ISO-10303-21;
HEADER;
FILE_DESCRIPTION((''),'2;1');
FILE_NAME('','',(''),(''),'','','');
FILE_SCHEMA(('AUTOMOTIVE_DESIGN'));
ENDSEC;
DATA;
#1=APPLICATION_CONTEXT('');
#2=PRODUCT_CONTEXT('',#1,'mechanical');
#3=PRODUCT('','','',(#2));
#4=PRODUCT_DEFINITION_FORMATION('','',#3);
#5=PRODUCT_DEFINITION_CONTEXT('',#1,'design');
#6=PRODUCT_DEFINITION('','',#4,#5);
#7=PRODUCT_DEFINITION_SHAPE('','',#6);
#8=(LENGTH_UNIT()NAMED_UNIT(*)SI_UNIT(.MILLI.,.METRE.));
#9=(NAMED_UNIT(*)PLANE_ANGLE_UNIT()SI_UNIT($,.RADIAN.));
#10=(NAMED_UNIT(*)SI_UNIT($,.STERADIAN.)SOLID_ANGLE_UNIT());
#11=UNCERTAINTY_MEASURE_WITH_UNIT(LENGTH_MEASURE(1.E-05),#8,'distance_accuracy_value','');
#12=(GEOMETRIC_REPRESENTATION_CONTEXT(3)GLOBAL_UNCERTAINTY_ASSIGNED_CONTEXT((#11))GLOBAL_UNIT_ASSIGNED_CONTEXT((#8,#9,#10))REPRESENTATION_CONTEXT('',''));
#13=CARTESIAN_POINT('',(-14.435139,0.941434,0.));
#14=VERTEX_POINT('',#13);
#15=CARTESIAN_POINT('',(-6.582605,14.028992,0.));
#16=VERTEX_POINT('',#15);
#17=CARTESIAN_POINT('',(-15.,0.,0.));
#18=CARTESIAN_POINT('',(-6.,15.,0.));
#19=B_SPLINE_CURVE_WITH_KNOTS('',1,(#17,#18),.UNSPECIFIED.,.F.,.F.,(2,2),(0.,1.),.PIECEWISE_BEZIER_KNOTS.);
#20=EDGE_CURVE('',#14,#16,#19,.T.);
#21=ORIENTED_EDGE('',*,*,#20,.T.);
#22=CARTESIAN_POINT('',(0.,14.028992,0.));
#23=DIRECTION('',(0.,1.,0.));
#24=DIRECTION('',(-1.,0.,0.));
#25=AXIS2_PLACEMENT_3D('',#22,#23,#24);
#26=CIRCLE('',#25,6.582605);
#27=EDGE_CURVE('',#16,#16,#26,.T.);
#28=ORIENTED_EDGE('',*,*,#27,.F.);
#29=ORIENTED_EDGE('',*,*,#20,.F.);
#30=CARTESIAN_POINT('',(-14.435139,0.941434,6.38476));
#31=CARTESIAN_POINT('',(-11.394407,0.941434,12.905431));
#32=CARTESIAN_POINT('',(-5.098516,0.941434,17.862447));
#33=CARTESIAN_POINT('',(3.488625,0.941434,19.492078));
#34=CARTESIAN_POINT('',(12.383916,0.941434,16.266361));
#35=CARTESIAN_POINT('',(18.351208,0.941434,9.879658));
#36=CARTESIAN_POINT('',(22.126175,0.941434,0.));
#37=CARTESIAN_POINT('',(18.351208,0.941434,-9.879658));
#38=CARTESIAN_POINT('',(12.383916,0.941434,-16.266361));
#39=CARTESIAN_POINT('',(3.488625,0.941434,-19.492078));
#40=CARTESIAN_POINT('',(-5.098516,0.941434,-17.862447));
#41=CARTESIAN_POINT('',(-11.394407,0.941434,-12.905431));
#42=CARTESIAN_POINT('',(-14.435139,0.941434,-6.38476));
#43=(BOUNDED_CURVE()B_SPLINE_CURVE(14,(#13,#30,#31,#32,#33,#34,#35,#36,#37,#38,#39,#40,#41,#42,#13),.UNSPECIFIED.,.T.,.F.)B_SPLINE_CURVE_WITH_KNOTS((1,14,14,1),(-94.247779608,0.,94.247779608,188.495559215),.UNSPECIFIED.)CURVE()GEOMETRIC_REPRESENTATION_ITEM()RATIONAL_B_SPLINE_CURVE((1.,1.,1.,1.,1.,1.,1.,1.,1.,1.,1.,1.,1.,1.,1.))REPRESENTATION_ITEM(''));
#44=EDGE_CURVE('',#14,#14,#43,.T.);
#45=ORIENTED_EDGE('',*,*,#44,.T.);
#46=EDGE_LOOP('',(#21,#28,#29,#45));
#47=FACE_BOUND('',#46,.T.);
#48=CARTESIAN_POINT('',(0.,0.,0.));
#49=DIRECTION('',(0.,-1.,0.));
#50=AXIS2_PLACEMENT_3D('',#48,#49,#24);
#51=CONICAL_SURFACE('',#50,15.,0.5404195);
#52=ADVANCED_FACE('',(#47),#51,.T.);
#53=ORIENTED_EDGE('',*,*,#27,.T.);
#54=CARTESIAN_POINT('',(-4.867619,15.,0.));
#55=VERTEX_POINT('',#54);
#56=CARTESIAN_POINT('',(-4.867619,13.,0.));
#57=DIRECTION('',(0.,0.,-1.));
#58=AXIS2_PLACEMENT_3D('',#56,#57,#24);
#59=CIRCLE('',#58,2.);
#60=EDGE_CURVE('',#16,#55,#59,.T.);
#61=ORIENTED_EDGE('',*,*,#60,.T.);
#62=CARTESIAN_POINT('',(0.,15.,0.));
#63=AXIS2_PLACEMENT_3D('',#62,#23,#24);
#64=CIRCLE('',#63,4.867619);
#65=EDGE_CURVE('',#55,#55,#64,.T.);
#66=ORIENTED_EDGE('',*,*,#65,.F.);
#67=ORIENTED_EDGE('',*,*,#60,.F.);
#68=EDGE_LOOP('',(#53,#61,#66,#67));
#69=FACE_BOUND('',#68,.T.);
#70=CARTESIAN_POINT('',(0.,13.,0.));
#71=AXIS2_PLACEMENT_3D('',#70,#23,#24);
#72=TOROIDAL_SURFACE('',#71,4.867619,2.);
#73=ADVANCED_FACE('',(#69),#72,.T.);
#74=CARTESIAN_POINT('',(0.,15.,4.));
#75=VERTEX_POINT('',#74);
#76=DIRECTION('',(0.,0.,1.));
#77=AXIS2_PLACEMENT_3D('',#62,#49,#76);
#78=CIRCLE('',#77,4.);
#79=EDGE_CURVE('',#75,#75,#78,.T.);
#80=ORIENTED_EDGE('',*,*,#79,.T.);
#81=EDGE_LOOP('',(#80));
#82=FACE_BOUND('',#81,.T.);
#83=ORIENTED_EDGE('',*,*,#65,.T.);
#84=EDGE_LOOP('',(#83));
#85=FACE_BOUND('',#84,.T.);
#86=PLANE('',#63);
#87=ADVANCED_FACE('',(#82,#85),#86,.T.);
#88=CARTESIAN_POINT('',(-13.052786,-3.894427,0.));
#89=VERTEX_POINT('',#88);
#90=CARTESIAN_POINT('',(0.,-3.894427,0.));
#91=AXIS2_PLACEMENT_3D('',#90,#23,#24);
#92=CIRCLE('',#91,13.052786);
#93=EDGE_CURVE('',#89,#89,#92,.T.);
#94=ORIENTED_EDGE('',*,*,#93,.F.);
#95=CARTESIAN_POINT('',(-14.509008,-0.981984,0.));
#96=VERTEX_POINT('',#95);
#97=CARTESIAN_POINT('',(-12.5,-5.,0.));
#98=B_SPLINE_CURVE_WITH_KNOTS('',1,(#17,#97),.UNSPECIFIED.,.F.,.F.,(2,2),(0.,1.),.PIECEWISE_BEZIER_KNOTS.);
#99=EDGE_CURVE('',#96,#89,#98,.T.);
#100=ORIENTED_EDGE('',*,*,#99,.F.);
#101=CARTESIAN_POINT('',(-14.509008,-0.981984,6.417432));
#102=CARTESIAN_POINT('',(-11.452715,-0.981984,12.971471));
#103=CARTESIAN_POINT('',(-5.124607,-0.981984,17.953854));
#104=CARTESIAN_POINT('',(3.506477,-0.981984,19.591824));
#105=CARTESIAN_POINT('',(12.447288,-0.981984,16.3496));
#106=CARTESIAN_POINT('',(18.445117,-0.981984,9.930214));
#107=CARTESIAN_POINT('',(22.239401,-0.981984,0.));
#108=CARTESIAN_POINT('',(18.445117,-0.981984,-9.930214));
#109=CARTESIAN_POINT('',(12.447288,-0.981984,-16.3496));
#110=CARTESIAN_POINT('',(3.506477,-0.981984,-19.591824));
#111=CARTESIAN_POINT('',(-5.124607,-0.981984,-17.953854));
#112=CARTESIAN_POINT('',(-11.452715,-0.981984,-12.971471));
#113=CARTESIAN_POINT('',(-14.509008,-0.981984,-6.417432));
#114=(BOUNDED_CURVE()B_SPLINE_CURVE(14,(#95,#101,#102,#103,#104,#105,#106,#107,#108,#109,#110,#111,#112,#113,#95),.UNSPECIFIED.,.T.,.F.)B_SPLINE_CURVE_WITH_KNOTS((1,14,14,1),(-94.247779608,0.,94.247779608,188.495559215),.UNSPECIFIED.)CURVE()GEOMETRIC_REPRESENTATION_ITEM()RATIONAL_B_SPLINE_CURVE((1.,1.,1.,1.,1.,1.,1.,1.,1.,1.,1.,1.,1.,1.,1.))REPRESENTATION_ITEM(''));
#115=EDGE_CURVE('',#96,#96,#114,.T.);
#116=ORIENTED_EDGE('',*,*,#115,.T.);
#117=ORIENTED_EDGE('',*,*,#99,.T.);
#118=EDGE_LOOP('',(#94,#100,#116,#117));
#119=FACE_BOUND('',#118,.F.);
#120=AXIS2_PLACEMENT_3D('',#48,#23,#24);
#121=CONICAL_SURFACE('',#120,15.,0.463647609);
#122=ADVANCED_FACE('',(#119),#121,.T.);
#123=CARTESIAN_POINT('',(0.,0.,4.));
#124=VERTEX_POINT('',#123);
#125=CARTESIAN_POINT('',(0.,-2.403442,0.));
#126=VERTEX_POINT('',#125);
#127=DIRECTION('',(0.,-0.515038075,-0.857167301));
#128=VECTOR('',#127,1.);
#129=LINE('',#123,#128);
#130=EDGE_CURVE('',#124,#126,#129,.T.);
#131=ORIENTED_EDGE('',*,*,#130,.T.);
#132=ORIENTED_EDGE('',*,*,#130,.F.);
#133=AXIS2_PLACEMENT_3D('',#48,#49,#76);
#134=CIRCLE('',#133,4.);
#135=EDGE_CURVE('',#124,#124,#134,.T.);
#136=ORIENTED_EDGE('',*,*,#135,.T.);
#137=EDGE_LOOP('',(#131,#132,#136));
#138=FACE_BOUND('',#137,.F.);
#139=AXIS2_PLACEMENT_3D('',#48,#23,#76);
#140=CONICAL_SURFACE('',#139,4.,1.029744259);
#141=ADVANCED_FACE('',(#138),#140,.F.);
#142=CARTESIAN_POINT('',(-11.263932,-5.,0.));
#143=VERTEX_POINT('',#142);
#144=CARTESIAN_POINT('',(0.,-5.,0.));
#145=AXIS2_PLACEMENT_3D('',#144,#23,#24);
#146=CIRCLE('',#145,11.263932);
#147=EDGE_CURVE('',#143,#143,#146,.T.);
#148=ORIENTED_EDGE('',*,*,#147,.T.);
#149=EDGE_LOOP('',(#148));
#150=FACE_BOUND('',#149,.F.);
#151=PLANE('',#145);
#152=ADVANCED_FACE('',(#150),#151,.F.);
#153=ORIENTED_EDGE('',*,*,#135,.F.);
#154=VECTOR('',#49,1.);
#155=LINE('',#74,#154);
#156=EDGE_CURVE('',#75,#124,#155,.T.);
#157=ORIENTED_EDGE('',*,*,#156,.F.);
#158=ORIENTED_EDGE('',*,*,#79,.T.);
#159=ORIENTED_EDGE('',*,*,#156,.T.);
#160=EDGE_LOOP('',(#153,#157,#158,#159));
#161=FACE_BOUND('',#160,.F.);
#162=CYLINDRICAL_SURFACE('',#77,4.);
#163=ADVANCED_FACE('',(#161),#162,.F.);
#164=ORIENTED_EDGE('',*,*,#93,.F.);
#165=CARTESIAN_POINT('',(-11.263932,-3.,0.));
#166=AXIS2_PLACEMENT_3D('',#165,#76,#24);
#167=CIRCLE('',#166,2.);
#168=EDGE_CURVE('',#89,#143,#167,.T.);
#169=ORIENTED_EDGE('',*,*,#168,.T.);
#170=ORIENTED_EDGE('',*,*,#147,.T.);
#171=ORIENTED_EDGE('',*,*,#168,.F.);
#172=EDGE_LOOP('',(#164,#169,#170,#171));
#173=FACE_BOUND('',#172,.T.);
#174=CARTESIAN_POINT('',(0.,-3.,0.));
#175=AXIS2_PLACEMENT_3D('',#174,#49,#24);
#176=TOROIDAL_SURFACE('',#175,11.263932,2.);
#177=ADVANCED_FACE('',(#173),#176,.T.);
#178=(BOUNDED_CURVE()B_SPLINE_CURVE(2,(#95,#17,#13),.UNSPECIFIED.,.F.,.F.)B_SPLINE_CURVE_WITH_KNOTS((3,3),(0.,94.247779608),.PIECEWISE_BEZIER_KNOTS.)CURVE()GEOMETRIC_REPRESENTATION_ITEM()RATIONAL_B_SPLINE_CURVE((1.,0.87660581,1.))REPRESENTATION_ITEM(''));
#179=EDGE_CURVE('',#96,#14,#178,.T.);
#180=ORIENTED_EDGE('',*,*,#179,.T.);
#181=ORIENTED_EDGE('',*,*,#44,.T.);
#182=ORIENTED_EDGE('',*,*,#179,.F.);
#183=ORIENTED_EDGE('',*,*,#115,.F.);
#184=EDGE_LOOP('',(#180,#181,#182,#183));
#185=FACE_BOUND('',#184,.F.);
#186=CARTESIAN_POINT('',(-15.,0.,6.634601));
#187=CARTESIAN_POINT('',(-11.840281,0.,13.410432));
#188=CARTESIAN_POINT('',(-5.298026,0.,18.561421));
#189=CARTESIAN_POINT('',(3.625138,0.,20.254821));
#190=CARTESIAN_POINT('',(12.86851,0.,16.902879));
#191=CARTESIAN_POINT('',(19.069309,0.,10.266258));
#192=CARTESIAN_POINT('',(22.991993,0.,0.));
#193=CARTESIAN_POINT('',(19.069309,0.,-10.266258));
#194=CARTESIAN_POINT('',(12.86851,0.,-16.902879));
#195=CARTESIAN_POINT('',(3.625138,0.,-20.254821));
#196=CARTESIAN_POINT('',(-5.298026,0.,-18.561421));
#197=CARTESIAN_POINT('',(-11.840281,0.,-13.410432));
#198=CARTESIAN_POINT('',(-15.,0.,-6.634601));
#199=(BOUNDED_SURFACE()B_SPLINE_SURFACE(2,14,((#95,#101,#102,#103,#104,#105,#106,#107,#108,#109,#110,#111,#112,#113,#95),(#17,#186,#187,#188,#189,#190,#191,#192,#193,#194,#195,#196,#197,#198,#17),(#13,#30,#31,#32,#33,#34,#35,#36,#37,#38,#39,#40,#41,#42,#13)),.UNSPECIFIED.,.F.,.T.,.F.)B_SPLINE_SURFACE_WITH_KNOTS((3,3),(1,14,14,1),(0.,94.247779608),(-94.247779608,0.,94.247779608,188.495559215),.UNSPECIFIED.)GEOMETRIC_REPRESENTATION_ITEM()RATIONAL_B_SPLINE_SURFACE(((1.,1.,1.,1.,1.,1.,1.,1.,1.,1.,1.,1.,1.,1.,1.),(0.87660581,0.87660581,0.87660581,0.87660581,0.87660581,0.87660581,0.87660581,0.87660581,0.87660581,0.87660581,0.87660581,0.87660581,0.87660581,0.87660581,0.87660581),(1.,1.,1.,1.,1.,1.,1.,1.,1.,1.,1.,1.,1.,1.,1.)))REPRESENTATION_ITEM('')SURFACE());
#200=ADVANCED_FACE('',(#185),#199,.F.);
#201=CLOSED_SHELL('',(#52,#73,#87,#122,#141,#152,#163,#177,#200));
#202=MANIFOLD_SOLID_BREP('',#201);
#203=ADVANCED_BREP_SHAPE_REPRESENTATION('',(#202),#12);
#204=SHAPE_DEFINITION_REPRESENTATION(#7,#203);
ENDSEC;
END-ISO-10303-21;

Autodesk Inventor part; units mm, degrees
ref_plane "YZ Plane" through (0, 0, 0) normal (1, 0, 0) x (0, 1, 0)
sketch "Sketch1" plane through (0, 0, 0) normal (0, 1, 0) x (-1, 0, 0)
  circle A0 centre (0, 0) radius 15
  dimension "d0" = 30
ref_plane "Work Plane1" through (0, 15, 0) normal (0, 1, 0) x (-1, 0, 0)
sketch "Sketch2" plane through (0, 15, 0) normal (0, 1, 0) x (-1, 0, 0)
  circle A0 centre (0, 0) radius 6
  dimension "d2" = 12
loft "Loft1" add profiles "Sketch1", "Sketch2"
ref_plane "Work Plane2" through (0, -5, 0) normal (0, 1, 0) x (-1, 0, 0)
sketch "Sketch3" plane through (0, -5, 0) normal (0, 1, 0) x (-1, 0, 0)
  circle A0 centre (0, 0) radius 12.5
  dimension "d8" = 25
loft "Loft2" add profiles "Sketch3" section 1 edges at (15, 0, 0)
fillet "Fillet1" radius 2 3 edges at (15, 0, 0) (12.5, -5, 0) (6, 15, 0)
sketch "Sketch4" plane through (0, 15, 0) normal (0, 1, 0) x (1, 0, 0)
  point P0 (0, 0)
  point P1 (0, 0)
hole "Hole1" at (0, 15, 0) direction (0, -1, 0) diameter 8 depth 15 tip angle 118
thread "Thread1" size "M8x1.25" class "6H" standard "ANSI Metric M Profile" full length
properties part number "Foot"
